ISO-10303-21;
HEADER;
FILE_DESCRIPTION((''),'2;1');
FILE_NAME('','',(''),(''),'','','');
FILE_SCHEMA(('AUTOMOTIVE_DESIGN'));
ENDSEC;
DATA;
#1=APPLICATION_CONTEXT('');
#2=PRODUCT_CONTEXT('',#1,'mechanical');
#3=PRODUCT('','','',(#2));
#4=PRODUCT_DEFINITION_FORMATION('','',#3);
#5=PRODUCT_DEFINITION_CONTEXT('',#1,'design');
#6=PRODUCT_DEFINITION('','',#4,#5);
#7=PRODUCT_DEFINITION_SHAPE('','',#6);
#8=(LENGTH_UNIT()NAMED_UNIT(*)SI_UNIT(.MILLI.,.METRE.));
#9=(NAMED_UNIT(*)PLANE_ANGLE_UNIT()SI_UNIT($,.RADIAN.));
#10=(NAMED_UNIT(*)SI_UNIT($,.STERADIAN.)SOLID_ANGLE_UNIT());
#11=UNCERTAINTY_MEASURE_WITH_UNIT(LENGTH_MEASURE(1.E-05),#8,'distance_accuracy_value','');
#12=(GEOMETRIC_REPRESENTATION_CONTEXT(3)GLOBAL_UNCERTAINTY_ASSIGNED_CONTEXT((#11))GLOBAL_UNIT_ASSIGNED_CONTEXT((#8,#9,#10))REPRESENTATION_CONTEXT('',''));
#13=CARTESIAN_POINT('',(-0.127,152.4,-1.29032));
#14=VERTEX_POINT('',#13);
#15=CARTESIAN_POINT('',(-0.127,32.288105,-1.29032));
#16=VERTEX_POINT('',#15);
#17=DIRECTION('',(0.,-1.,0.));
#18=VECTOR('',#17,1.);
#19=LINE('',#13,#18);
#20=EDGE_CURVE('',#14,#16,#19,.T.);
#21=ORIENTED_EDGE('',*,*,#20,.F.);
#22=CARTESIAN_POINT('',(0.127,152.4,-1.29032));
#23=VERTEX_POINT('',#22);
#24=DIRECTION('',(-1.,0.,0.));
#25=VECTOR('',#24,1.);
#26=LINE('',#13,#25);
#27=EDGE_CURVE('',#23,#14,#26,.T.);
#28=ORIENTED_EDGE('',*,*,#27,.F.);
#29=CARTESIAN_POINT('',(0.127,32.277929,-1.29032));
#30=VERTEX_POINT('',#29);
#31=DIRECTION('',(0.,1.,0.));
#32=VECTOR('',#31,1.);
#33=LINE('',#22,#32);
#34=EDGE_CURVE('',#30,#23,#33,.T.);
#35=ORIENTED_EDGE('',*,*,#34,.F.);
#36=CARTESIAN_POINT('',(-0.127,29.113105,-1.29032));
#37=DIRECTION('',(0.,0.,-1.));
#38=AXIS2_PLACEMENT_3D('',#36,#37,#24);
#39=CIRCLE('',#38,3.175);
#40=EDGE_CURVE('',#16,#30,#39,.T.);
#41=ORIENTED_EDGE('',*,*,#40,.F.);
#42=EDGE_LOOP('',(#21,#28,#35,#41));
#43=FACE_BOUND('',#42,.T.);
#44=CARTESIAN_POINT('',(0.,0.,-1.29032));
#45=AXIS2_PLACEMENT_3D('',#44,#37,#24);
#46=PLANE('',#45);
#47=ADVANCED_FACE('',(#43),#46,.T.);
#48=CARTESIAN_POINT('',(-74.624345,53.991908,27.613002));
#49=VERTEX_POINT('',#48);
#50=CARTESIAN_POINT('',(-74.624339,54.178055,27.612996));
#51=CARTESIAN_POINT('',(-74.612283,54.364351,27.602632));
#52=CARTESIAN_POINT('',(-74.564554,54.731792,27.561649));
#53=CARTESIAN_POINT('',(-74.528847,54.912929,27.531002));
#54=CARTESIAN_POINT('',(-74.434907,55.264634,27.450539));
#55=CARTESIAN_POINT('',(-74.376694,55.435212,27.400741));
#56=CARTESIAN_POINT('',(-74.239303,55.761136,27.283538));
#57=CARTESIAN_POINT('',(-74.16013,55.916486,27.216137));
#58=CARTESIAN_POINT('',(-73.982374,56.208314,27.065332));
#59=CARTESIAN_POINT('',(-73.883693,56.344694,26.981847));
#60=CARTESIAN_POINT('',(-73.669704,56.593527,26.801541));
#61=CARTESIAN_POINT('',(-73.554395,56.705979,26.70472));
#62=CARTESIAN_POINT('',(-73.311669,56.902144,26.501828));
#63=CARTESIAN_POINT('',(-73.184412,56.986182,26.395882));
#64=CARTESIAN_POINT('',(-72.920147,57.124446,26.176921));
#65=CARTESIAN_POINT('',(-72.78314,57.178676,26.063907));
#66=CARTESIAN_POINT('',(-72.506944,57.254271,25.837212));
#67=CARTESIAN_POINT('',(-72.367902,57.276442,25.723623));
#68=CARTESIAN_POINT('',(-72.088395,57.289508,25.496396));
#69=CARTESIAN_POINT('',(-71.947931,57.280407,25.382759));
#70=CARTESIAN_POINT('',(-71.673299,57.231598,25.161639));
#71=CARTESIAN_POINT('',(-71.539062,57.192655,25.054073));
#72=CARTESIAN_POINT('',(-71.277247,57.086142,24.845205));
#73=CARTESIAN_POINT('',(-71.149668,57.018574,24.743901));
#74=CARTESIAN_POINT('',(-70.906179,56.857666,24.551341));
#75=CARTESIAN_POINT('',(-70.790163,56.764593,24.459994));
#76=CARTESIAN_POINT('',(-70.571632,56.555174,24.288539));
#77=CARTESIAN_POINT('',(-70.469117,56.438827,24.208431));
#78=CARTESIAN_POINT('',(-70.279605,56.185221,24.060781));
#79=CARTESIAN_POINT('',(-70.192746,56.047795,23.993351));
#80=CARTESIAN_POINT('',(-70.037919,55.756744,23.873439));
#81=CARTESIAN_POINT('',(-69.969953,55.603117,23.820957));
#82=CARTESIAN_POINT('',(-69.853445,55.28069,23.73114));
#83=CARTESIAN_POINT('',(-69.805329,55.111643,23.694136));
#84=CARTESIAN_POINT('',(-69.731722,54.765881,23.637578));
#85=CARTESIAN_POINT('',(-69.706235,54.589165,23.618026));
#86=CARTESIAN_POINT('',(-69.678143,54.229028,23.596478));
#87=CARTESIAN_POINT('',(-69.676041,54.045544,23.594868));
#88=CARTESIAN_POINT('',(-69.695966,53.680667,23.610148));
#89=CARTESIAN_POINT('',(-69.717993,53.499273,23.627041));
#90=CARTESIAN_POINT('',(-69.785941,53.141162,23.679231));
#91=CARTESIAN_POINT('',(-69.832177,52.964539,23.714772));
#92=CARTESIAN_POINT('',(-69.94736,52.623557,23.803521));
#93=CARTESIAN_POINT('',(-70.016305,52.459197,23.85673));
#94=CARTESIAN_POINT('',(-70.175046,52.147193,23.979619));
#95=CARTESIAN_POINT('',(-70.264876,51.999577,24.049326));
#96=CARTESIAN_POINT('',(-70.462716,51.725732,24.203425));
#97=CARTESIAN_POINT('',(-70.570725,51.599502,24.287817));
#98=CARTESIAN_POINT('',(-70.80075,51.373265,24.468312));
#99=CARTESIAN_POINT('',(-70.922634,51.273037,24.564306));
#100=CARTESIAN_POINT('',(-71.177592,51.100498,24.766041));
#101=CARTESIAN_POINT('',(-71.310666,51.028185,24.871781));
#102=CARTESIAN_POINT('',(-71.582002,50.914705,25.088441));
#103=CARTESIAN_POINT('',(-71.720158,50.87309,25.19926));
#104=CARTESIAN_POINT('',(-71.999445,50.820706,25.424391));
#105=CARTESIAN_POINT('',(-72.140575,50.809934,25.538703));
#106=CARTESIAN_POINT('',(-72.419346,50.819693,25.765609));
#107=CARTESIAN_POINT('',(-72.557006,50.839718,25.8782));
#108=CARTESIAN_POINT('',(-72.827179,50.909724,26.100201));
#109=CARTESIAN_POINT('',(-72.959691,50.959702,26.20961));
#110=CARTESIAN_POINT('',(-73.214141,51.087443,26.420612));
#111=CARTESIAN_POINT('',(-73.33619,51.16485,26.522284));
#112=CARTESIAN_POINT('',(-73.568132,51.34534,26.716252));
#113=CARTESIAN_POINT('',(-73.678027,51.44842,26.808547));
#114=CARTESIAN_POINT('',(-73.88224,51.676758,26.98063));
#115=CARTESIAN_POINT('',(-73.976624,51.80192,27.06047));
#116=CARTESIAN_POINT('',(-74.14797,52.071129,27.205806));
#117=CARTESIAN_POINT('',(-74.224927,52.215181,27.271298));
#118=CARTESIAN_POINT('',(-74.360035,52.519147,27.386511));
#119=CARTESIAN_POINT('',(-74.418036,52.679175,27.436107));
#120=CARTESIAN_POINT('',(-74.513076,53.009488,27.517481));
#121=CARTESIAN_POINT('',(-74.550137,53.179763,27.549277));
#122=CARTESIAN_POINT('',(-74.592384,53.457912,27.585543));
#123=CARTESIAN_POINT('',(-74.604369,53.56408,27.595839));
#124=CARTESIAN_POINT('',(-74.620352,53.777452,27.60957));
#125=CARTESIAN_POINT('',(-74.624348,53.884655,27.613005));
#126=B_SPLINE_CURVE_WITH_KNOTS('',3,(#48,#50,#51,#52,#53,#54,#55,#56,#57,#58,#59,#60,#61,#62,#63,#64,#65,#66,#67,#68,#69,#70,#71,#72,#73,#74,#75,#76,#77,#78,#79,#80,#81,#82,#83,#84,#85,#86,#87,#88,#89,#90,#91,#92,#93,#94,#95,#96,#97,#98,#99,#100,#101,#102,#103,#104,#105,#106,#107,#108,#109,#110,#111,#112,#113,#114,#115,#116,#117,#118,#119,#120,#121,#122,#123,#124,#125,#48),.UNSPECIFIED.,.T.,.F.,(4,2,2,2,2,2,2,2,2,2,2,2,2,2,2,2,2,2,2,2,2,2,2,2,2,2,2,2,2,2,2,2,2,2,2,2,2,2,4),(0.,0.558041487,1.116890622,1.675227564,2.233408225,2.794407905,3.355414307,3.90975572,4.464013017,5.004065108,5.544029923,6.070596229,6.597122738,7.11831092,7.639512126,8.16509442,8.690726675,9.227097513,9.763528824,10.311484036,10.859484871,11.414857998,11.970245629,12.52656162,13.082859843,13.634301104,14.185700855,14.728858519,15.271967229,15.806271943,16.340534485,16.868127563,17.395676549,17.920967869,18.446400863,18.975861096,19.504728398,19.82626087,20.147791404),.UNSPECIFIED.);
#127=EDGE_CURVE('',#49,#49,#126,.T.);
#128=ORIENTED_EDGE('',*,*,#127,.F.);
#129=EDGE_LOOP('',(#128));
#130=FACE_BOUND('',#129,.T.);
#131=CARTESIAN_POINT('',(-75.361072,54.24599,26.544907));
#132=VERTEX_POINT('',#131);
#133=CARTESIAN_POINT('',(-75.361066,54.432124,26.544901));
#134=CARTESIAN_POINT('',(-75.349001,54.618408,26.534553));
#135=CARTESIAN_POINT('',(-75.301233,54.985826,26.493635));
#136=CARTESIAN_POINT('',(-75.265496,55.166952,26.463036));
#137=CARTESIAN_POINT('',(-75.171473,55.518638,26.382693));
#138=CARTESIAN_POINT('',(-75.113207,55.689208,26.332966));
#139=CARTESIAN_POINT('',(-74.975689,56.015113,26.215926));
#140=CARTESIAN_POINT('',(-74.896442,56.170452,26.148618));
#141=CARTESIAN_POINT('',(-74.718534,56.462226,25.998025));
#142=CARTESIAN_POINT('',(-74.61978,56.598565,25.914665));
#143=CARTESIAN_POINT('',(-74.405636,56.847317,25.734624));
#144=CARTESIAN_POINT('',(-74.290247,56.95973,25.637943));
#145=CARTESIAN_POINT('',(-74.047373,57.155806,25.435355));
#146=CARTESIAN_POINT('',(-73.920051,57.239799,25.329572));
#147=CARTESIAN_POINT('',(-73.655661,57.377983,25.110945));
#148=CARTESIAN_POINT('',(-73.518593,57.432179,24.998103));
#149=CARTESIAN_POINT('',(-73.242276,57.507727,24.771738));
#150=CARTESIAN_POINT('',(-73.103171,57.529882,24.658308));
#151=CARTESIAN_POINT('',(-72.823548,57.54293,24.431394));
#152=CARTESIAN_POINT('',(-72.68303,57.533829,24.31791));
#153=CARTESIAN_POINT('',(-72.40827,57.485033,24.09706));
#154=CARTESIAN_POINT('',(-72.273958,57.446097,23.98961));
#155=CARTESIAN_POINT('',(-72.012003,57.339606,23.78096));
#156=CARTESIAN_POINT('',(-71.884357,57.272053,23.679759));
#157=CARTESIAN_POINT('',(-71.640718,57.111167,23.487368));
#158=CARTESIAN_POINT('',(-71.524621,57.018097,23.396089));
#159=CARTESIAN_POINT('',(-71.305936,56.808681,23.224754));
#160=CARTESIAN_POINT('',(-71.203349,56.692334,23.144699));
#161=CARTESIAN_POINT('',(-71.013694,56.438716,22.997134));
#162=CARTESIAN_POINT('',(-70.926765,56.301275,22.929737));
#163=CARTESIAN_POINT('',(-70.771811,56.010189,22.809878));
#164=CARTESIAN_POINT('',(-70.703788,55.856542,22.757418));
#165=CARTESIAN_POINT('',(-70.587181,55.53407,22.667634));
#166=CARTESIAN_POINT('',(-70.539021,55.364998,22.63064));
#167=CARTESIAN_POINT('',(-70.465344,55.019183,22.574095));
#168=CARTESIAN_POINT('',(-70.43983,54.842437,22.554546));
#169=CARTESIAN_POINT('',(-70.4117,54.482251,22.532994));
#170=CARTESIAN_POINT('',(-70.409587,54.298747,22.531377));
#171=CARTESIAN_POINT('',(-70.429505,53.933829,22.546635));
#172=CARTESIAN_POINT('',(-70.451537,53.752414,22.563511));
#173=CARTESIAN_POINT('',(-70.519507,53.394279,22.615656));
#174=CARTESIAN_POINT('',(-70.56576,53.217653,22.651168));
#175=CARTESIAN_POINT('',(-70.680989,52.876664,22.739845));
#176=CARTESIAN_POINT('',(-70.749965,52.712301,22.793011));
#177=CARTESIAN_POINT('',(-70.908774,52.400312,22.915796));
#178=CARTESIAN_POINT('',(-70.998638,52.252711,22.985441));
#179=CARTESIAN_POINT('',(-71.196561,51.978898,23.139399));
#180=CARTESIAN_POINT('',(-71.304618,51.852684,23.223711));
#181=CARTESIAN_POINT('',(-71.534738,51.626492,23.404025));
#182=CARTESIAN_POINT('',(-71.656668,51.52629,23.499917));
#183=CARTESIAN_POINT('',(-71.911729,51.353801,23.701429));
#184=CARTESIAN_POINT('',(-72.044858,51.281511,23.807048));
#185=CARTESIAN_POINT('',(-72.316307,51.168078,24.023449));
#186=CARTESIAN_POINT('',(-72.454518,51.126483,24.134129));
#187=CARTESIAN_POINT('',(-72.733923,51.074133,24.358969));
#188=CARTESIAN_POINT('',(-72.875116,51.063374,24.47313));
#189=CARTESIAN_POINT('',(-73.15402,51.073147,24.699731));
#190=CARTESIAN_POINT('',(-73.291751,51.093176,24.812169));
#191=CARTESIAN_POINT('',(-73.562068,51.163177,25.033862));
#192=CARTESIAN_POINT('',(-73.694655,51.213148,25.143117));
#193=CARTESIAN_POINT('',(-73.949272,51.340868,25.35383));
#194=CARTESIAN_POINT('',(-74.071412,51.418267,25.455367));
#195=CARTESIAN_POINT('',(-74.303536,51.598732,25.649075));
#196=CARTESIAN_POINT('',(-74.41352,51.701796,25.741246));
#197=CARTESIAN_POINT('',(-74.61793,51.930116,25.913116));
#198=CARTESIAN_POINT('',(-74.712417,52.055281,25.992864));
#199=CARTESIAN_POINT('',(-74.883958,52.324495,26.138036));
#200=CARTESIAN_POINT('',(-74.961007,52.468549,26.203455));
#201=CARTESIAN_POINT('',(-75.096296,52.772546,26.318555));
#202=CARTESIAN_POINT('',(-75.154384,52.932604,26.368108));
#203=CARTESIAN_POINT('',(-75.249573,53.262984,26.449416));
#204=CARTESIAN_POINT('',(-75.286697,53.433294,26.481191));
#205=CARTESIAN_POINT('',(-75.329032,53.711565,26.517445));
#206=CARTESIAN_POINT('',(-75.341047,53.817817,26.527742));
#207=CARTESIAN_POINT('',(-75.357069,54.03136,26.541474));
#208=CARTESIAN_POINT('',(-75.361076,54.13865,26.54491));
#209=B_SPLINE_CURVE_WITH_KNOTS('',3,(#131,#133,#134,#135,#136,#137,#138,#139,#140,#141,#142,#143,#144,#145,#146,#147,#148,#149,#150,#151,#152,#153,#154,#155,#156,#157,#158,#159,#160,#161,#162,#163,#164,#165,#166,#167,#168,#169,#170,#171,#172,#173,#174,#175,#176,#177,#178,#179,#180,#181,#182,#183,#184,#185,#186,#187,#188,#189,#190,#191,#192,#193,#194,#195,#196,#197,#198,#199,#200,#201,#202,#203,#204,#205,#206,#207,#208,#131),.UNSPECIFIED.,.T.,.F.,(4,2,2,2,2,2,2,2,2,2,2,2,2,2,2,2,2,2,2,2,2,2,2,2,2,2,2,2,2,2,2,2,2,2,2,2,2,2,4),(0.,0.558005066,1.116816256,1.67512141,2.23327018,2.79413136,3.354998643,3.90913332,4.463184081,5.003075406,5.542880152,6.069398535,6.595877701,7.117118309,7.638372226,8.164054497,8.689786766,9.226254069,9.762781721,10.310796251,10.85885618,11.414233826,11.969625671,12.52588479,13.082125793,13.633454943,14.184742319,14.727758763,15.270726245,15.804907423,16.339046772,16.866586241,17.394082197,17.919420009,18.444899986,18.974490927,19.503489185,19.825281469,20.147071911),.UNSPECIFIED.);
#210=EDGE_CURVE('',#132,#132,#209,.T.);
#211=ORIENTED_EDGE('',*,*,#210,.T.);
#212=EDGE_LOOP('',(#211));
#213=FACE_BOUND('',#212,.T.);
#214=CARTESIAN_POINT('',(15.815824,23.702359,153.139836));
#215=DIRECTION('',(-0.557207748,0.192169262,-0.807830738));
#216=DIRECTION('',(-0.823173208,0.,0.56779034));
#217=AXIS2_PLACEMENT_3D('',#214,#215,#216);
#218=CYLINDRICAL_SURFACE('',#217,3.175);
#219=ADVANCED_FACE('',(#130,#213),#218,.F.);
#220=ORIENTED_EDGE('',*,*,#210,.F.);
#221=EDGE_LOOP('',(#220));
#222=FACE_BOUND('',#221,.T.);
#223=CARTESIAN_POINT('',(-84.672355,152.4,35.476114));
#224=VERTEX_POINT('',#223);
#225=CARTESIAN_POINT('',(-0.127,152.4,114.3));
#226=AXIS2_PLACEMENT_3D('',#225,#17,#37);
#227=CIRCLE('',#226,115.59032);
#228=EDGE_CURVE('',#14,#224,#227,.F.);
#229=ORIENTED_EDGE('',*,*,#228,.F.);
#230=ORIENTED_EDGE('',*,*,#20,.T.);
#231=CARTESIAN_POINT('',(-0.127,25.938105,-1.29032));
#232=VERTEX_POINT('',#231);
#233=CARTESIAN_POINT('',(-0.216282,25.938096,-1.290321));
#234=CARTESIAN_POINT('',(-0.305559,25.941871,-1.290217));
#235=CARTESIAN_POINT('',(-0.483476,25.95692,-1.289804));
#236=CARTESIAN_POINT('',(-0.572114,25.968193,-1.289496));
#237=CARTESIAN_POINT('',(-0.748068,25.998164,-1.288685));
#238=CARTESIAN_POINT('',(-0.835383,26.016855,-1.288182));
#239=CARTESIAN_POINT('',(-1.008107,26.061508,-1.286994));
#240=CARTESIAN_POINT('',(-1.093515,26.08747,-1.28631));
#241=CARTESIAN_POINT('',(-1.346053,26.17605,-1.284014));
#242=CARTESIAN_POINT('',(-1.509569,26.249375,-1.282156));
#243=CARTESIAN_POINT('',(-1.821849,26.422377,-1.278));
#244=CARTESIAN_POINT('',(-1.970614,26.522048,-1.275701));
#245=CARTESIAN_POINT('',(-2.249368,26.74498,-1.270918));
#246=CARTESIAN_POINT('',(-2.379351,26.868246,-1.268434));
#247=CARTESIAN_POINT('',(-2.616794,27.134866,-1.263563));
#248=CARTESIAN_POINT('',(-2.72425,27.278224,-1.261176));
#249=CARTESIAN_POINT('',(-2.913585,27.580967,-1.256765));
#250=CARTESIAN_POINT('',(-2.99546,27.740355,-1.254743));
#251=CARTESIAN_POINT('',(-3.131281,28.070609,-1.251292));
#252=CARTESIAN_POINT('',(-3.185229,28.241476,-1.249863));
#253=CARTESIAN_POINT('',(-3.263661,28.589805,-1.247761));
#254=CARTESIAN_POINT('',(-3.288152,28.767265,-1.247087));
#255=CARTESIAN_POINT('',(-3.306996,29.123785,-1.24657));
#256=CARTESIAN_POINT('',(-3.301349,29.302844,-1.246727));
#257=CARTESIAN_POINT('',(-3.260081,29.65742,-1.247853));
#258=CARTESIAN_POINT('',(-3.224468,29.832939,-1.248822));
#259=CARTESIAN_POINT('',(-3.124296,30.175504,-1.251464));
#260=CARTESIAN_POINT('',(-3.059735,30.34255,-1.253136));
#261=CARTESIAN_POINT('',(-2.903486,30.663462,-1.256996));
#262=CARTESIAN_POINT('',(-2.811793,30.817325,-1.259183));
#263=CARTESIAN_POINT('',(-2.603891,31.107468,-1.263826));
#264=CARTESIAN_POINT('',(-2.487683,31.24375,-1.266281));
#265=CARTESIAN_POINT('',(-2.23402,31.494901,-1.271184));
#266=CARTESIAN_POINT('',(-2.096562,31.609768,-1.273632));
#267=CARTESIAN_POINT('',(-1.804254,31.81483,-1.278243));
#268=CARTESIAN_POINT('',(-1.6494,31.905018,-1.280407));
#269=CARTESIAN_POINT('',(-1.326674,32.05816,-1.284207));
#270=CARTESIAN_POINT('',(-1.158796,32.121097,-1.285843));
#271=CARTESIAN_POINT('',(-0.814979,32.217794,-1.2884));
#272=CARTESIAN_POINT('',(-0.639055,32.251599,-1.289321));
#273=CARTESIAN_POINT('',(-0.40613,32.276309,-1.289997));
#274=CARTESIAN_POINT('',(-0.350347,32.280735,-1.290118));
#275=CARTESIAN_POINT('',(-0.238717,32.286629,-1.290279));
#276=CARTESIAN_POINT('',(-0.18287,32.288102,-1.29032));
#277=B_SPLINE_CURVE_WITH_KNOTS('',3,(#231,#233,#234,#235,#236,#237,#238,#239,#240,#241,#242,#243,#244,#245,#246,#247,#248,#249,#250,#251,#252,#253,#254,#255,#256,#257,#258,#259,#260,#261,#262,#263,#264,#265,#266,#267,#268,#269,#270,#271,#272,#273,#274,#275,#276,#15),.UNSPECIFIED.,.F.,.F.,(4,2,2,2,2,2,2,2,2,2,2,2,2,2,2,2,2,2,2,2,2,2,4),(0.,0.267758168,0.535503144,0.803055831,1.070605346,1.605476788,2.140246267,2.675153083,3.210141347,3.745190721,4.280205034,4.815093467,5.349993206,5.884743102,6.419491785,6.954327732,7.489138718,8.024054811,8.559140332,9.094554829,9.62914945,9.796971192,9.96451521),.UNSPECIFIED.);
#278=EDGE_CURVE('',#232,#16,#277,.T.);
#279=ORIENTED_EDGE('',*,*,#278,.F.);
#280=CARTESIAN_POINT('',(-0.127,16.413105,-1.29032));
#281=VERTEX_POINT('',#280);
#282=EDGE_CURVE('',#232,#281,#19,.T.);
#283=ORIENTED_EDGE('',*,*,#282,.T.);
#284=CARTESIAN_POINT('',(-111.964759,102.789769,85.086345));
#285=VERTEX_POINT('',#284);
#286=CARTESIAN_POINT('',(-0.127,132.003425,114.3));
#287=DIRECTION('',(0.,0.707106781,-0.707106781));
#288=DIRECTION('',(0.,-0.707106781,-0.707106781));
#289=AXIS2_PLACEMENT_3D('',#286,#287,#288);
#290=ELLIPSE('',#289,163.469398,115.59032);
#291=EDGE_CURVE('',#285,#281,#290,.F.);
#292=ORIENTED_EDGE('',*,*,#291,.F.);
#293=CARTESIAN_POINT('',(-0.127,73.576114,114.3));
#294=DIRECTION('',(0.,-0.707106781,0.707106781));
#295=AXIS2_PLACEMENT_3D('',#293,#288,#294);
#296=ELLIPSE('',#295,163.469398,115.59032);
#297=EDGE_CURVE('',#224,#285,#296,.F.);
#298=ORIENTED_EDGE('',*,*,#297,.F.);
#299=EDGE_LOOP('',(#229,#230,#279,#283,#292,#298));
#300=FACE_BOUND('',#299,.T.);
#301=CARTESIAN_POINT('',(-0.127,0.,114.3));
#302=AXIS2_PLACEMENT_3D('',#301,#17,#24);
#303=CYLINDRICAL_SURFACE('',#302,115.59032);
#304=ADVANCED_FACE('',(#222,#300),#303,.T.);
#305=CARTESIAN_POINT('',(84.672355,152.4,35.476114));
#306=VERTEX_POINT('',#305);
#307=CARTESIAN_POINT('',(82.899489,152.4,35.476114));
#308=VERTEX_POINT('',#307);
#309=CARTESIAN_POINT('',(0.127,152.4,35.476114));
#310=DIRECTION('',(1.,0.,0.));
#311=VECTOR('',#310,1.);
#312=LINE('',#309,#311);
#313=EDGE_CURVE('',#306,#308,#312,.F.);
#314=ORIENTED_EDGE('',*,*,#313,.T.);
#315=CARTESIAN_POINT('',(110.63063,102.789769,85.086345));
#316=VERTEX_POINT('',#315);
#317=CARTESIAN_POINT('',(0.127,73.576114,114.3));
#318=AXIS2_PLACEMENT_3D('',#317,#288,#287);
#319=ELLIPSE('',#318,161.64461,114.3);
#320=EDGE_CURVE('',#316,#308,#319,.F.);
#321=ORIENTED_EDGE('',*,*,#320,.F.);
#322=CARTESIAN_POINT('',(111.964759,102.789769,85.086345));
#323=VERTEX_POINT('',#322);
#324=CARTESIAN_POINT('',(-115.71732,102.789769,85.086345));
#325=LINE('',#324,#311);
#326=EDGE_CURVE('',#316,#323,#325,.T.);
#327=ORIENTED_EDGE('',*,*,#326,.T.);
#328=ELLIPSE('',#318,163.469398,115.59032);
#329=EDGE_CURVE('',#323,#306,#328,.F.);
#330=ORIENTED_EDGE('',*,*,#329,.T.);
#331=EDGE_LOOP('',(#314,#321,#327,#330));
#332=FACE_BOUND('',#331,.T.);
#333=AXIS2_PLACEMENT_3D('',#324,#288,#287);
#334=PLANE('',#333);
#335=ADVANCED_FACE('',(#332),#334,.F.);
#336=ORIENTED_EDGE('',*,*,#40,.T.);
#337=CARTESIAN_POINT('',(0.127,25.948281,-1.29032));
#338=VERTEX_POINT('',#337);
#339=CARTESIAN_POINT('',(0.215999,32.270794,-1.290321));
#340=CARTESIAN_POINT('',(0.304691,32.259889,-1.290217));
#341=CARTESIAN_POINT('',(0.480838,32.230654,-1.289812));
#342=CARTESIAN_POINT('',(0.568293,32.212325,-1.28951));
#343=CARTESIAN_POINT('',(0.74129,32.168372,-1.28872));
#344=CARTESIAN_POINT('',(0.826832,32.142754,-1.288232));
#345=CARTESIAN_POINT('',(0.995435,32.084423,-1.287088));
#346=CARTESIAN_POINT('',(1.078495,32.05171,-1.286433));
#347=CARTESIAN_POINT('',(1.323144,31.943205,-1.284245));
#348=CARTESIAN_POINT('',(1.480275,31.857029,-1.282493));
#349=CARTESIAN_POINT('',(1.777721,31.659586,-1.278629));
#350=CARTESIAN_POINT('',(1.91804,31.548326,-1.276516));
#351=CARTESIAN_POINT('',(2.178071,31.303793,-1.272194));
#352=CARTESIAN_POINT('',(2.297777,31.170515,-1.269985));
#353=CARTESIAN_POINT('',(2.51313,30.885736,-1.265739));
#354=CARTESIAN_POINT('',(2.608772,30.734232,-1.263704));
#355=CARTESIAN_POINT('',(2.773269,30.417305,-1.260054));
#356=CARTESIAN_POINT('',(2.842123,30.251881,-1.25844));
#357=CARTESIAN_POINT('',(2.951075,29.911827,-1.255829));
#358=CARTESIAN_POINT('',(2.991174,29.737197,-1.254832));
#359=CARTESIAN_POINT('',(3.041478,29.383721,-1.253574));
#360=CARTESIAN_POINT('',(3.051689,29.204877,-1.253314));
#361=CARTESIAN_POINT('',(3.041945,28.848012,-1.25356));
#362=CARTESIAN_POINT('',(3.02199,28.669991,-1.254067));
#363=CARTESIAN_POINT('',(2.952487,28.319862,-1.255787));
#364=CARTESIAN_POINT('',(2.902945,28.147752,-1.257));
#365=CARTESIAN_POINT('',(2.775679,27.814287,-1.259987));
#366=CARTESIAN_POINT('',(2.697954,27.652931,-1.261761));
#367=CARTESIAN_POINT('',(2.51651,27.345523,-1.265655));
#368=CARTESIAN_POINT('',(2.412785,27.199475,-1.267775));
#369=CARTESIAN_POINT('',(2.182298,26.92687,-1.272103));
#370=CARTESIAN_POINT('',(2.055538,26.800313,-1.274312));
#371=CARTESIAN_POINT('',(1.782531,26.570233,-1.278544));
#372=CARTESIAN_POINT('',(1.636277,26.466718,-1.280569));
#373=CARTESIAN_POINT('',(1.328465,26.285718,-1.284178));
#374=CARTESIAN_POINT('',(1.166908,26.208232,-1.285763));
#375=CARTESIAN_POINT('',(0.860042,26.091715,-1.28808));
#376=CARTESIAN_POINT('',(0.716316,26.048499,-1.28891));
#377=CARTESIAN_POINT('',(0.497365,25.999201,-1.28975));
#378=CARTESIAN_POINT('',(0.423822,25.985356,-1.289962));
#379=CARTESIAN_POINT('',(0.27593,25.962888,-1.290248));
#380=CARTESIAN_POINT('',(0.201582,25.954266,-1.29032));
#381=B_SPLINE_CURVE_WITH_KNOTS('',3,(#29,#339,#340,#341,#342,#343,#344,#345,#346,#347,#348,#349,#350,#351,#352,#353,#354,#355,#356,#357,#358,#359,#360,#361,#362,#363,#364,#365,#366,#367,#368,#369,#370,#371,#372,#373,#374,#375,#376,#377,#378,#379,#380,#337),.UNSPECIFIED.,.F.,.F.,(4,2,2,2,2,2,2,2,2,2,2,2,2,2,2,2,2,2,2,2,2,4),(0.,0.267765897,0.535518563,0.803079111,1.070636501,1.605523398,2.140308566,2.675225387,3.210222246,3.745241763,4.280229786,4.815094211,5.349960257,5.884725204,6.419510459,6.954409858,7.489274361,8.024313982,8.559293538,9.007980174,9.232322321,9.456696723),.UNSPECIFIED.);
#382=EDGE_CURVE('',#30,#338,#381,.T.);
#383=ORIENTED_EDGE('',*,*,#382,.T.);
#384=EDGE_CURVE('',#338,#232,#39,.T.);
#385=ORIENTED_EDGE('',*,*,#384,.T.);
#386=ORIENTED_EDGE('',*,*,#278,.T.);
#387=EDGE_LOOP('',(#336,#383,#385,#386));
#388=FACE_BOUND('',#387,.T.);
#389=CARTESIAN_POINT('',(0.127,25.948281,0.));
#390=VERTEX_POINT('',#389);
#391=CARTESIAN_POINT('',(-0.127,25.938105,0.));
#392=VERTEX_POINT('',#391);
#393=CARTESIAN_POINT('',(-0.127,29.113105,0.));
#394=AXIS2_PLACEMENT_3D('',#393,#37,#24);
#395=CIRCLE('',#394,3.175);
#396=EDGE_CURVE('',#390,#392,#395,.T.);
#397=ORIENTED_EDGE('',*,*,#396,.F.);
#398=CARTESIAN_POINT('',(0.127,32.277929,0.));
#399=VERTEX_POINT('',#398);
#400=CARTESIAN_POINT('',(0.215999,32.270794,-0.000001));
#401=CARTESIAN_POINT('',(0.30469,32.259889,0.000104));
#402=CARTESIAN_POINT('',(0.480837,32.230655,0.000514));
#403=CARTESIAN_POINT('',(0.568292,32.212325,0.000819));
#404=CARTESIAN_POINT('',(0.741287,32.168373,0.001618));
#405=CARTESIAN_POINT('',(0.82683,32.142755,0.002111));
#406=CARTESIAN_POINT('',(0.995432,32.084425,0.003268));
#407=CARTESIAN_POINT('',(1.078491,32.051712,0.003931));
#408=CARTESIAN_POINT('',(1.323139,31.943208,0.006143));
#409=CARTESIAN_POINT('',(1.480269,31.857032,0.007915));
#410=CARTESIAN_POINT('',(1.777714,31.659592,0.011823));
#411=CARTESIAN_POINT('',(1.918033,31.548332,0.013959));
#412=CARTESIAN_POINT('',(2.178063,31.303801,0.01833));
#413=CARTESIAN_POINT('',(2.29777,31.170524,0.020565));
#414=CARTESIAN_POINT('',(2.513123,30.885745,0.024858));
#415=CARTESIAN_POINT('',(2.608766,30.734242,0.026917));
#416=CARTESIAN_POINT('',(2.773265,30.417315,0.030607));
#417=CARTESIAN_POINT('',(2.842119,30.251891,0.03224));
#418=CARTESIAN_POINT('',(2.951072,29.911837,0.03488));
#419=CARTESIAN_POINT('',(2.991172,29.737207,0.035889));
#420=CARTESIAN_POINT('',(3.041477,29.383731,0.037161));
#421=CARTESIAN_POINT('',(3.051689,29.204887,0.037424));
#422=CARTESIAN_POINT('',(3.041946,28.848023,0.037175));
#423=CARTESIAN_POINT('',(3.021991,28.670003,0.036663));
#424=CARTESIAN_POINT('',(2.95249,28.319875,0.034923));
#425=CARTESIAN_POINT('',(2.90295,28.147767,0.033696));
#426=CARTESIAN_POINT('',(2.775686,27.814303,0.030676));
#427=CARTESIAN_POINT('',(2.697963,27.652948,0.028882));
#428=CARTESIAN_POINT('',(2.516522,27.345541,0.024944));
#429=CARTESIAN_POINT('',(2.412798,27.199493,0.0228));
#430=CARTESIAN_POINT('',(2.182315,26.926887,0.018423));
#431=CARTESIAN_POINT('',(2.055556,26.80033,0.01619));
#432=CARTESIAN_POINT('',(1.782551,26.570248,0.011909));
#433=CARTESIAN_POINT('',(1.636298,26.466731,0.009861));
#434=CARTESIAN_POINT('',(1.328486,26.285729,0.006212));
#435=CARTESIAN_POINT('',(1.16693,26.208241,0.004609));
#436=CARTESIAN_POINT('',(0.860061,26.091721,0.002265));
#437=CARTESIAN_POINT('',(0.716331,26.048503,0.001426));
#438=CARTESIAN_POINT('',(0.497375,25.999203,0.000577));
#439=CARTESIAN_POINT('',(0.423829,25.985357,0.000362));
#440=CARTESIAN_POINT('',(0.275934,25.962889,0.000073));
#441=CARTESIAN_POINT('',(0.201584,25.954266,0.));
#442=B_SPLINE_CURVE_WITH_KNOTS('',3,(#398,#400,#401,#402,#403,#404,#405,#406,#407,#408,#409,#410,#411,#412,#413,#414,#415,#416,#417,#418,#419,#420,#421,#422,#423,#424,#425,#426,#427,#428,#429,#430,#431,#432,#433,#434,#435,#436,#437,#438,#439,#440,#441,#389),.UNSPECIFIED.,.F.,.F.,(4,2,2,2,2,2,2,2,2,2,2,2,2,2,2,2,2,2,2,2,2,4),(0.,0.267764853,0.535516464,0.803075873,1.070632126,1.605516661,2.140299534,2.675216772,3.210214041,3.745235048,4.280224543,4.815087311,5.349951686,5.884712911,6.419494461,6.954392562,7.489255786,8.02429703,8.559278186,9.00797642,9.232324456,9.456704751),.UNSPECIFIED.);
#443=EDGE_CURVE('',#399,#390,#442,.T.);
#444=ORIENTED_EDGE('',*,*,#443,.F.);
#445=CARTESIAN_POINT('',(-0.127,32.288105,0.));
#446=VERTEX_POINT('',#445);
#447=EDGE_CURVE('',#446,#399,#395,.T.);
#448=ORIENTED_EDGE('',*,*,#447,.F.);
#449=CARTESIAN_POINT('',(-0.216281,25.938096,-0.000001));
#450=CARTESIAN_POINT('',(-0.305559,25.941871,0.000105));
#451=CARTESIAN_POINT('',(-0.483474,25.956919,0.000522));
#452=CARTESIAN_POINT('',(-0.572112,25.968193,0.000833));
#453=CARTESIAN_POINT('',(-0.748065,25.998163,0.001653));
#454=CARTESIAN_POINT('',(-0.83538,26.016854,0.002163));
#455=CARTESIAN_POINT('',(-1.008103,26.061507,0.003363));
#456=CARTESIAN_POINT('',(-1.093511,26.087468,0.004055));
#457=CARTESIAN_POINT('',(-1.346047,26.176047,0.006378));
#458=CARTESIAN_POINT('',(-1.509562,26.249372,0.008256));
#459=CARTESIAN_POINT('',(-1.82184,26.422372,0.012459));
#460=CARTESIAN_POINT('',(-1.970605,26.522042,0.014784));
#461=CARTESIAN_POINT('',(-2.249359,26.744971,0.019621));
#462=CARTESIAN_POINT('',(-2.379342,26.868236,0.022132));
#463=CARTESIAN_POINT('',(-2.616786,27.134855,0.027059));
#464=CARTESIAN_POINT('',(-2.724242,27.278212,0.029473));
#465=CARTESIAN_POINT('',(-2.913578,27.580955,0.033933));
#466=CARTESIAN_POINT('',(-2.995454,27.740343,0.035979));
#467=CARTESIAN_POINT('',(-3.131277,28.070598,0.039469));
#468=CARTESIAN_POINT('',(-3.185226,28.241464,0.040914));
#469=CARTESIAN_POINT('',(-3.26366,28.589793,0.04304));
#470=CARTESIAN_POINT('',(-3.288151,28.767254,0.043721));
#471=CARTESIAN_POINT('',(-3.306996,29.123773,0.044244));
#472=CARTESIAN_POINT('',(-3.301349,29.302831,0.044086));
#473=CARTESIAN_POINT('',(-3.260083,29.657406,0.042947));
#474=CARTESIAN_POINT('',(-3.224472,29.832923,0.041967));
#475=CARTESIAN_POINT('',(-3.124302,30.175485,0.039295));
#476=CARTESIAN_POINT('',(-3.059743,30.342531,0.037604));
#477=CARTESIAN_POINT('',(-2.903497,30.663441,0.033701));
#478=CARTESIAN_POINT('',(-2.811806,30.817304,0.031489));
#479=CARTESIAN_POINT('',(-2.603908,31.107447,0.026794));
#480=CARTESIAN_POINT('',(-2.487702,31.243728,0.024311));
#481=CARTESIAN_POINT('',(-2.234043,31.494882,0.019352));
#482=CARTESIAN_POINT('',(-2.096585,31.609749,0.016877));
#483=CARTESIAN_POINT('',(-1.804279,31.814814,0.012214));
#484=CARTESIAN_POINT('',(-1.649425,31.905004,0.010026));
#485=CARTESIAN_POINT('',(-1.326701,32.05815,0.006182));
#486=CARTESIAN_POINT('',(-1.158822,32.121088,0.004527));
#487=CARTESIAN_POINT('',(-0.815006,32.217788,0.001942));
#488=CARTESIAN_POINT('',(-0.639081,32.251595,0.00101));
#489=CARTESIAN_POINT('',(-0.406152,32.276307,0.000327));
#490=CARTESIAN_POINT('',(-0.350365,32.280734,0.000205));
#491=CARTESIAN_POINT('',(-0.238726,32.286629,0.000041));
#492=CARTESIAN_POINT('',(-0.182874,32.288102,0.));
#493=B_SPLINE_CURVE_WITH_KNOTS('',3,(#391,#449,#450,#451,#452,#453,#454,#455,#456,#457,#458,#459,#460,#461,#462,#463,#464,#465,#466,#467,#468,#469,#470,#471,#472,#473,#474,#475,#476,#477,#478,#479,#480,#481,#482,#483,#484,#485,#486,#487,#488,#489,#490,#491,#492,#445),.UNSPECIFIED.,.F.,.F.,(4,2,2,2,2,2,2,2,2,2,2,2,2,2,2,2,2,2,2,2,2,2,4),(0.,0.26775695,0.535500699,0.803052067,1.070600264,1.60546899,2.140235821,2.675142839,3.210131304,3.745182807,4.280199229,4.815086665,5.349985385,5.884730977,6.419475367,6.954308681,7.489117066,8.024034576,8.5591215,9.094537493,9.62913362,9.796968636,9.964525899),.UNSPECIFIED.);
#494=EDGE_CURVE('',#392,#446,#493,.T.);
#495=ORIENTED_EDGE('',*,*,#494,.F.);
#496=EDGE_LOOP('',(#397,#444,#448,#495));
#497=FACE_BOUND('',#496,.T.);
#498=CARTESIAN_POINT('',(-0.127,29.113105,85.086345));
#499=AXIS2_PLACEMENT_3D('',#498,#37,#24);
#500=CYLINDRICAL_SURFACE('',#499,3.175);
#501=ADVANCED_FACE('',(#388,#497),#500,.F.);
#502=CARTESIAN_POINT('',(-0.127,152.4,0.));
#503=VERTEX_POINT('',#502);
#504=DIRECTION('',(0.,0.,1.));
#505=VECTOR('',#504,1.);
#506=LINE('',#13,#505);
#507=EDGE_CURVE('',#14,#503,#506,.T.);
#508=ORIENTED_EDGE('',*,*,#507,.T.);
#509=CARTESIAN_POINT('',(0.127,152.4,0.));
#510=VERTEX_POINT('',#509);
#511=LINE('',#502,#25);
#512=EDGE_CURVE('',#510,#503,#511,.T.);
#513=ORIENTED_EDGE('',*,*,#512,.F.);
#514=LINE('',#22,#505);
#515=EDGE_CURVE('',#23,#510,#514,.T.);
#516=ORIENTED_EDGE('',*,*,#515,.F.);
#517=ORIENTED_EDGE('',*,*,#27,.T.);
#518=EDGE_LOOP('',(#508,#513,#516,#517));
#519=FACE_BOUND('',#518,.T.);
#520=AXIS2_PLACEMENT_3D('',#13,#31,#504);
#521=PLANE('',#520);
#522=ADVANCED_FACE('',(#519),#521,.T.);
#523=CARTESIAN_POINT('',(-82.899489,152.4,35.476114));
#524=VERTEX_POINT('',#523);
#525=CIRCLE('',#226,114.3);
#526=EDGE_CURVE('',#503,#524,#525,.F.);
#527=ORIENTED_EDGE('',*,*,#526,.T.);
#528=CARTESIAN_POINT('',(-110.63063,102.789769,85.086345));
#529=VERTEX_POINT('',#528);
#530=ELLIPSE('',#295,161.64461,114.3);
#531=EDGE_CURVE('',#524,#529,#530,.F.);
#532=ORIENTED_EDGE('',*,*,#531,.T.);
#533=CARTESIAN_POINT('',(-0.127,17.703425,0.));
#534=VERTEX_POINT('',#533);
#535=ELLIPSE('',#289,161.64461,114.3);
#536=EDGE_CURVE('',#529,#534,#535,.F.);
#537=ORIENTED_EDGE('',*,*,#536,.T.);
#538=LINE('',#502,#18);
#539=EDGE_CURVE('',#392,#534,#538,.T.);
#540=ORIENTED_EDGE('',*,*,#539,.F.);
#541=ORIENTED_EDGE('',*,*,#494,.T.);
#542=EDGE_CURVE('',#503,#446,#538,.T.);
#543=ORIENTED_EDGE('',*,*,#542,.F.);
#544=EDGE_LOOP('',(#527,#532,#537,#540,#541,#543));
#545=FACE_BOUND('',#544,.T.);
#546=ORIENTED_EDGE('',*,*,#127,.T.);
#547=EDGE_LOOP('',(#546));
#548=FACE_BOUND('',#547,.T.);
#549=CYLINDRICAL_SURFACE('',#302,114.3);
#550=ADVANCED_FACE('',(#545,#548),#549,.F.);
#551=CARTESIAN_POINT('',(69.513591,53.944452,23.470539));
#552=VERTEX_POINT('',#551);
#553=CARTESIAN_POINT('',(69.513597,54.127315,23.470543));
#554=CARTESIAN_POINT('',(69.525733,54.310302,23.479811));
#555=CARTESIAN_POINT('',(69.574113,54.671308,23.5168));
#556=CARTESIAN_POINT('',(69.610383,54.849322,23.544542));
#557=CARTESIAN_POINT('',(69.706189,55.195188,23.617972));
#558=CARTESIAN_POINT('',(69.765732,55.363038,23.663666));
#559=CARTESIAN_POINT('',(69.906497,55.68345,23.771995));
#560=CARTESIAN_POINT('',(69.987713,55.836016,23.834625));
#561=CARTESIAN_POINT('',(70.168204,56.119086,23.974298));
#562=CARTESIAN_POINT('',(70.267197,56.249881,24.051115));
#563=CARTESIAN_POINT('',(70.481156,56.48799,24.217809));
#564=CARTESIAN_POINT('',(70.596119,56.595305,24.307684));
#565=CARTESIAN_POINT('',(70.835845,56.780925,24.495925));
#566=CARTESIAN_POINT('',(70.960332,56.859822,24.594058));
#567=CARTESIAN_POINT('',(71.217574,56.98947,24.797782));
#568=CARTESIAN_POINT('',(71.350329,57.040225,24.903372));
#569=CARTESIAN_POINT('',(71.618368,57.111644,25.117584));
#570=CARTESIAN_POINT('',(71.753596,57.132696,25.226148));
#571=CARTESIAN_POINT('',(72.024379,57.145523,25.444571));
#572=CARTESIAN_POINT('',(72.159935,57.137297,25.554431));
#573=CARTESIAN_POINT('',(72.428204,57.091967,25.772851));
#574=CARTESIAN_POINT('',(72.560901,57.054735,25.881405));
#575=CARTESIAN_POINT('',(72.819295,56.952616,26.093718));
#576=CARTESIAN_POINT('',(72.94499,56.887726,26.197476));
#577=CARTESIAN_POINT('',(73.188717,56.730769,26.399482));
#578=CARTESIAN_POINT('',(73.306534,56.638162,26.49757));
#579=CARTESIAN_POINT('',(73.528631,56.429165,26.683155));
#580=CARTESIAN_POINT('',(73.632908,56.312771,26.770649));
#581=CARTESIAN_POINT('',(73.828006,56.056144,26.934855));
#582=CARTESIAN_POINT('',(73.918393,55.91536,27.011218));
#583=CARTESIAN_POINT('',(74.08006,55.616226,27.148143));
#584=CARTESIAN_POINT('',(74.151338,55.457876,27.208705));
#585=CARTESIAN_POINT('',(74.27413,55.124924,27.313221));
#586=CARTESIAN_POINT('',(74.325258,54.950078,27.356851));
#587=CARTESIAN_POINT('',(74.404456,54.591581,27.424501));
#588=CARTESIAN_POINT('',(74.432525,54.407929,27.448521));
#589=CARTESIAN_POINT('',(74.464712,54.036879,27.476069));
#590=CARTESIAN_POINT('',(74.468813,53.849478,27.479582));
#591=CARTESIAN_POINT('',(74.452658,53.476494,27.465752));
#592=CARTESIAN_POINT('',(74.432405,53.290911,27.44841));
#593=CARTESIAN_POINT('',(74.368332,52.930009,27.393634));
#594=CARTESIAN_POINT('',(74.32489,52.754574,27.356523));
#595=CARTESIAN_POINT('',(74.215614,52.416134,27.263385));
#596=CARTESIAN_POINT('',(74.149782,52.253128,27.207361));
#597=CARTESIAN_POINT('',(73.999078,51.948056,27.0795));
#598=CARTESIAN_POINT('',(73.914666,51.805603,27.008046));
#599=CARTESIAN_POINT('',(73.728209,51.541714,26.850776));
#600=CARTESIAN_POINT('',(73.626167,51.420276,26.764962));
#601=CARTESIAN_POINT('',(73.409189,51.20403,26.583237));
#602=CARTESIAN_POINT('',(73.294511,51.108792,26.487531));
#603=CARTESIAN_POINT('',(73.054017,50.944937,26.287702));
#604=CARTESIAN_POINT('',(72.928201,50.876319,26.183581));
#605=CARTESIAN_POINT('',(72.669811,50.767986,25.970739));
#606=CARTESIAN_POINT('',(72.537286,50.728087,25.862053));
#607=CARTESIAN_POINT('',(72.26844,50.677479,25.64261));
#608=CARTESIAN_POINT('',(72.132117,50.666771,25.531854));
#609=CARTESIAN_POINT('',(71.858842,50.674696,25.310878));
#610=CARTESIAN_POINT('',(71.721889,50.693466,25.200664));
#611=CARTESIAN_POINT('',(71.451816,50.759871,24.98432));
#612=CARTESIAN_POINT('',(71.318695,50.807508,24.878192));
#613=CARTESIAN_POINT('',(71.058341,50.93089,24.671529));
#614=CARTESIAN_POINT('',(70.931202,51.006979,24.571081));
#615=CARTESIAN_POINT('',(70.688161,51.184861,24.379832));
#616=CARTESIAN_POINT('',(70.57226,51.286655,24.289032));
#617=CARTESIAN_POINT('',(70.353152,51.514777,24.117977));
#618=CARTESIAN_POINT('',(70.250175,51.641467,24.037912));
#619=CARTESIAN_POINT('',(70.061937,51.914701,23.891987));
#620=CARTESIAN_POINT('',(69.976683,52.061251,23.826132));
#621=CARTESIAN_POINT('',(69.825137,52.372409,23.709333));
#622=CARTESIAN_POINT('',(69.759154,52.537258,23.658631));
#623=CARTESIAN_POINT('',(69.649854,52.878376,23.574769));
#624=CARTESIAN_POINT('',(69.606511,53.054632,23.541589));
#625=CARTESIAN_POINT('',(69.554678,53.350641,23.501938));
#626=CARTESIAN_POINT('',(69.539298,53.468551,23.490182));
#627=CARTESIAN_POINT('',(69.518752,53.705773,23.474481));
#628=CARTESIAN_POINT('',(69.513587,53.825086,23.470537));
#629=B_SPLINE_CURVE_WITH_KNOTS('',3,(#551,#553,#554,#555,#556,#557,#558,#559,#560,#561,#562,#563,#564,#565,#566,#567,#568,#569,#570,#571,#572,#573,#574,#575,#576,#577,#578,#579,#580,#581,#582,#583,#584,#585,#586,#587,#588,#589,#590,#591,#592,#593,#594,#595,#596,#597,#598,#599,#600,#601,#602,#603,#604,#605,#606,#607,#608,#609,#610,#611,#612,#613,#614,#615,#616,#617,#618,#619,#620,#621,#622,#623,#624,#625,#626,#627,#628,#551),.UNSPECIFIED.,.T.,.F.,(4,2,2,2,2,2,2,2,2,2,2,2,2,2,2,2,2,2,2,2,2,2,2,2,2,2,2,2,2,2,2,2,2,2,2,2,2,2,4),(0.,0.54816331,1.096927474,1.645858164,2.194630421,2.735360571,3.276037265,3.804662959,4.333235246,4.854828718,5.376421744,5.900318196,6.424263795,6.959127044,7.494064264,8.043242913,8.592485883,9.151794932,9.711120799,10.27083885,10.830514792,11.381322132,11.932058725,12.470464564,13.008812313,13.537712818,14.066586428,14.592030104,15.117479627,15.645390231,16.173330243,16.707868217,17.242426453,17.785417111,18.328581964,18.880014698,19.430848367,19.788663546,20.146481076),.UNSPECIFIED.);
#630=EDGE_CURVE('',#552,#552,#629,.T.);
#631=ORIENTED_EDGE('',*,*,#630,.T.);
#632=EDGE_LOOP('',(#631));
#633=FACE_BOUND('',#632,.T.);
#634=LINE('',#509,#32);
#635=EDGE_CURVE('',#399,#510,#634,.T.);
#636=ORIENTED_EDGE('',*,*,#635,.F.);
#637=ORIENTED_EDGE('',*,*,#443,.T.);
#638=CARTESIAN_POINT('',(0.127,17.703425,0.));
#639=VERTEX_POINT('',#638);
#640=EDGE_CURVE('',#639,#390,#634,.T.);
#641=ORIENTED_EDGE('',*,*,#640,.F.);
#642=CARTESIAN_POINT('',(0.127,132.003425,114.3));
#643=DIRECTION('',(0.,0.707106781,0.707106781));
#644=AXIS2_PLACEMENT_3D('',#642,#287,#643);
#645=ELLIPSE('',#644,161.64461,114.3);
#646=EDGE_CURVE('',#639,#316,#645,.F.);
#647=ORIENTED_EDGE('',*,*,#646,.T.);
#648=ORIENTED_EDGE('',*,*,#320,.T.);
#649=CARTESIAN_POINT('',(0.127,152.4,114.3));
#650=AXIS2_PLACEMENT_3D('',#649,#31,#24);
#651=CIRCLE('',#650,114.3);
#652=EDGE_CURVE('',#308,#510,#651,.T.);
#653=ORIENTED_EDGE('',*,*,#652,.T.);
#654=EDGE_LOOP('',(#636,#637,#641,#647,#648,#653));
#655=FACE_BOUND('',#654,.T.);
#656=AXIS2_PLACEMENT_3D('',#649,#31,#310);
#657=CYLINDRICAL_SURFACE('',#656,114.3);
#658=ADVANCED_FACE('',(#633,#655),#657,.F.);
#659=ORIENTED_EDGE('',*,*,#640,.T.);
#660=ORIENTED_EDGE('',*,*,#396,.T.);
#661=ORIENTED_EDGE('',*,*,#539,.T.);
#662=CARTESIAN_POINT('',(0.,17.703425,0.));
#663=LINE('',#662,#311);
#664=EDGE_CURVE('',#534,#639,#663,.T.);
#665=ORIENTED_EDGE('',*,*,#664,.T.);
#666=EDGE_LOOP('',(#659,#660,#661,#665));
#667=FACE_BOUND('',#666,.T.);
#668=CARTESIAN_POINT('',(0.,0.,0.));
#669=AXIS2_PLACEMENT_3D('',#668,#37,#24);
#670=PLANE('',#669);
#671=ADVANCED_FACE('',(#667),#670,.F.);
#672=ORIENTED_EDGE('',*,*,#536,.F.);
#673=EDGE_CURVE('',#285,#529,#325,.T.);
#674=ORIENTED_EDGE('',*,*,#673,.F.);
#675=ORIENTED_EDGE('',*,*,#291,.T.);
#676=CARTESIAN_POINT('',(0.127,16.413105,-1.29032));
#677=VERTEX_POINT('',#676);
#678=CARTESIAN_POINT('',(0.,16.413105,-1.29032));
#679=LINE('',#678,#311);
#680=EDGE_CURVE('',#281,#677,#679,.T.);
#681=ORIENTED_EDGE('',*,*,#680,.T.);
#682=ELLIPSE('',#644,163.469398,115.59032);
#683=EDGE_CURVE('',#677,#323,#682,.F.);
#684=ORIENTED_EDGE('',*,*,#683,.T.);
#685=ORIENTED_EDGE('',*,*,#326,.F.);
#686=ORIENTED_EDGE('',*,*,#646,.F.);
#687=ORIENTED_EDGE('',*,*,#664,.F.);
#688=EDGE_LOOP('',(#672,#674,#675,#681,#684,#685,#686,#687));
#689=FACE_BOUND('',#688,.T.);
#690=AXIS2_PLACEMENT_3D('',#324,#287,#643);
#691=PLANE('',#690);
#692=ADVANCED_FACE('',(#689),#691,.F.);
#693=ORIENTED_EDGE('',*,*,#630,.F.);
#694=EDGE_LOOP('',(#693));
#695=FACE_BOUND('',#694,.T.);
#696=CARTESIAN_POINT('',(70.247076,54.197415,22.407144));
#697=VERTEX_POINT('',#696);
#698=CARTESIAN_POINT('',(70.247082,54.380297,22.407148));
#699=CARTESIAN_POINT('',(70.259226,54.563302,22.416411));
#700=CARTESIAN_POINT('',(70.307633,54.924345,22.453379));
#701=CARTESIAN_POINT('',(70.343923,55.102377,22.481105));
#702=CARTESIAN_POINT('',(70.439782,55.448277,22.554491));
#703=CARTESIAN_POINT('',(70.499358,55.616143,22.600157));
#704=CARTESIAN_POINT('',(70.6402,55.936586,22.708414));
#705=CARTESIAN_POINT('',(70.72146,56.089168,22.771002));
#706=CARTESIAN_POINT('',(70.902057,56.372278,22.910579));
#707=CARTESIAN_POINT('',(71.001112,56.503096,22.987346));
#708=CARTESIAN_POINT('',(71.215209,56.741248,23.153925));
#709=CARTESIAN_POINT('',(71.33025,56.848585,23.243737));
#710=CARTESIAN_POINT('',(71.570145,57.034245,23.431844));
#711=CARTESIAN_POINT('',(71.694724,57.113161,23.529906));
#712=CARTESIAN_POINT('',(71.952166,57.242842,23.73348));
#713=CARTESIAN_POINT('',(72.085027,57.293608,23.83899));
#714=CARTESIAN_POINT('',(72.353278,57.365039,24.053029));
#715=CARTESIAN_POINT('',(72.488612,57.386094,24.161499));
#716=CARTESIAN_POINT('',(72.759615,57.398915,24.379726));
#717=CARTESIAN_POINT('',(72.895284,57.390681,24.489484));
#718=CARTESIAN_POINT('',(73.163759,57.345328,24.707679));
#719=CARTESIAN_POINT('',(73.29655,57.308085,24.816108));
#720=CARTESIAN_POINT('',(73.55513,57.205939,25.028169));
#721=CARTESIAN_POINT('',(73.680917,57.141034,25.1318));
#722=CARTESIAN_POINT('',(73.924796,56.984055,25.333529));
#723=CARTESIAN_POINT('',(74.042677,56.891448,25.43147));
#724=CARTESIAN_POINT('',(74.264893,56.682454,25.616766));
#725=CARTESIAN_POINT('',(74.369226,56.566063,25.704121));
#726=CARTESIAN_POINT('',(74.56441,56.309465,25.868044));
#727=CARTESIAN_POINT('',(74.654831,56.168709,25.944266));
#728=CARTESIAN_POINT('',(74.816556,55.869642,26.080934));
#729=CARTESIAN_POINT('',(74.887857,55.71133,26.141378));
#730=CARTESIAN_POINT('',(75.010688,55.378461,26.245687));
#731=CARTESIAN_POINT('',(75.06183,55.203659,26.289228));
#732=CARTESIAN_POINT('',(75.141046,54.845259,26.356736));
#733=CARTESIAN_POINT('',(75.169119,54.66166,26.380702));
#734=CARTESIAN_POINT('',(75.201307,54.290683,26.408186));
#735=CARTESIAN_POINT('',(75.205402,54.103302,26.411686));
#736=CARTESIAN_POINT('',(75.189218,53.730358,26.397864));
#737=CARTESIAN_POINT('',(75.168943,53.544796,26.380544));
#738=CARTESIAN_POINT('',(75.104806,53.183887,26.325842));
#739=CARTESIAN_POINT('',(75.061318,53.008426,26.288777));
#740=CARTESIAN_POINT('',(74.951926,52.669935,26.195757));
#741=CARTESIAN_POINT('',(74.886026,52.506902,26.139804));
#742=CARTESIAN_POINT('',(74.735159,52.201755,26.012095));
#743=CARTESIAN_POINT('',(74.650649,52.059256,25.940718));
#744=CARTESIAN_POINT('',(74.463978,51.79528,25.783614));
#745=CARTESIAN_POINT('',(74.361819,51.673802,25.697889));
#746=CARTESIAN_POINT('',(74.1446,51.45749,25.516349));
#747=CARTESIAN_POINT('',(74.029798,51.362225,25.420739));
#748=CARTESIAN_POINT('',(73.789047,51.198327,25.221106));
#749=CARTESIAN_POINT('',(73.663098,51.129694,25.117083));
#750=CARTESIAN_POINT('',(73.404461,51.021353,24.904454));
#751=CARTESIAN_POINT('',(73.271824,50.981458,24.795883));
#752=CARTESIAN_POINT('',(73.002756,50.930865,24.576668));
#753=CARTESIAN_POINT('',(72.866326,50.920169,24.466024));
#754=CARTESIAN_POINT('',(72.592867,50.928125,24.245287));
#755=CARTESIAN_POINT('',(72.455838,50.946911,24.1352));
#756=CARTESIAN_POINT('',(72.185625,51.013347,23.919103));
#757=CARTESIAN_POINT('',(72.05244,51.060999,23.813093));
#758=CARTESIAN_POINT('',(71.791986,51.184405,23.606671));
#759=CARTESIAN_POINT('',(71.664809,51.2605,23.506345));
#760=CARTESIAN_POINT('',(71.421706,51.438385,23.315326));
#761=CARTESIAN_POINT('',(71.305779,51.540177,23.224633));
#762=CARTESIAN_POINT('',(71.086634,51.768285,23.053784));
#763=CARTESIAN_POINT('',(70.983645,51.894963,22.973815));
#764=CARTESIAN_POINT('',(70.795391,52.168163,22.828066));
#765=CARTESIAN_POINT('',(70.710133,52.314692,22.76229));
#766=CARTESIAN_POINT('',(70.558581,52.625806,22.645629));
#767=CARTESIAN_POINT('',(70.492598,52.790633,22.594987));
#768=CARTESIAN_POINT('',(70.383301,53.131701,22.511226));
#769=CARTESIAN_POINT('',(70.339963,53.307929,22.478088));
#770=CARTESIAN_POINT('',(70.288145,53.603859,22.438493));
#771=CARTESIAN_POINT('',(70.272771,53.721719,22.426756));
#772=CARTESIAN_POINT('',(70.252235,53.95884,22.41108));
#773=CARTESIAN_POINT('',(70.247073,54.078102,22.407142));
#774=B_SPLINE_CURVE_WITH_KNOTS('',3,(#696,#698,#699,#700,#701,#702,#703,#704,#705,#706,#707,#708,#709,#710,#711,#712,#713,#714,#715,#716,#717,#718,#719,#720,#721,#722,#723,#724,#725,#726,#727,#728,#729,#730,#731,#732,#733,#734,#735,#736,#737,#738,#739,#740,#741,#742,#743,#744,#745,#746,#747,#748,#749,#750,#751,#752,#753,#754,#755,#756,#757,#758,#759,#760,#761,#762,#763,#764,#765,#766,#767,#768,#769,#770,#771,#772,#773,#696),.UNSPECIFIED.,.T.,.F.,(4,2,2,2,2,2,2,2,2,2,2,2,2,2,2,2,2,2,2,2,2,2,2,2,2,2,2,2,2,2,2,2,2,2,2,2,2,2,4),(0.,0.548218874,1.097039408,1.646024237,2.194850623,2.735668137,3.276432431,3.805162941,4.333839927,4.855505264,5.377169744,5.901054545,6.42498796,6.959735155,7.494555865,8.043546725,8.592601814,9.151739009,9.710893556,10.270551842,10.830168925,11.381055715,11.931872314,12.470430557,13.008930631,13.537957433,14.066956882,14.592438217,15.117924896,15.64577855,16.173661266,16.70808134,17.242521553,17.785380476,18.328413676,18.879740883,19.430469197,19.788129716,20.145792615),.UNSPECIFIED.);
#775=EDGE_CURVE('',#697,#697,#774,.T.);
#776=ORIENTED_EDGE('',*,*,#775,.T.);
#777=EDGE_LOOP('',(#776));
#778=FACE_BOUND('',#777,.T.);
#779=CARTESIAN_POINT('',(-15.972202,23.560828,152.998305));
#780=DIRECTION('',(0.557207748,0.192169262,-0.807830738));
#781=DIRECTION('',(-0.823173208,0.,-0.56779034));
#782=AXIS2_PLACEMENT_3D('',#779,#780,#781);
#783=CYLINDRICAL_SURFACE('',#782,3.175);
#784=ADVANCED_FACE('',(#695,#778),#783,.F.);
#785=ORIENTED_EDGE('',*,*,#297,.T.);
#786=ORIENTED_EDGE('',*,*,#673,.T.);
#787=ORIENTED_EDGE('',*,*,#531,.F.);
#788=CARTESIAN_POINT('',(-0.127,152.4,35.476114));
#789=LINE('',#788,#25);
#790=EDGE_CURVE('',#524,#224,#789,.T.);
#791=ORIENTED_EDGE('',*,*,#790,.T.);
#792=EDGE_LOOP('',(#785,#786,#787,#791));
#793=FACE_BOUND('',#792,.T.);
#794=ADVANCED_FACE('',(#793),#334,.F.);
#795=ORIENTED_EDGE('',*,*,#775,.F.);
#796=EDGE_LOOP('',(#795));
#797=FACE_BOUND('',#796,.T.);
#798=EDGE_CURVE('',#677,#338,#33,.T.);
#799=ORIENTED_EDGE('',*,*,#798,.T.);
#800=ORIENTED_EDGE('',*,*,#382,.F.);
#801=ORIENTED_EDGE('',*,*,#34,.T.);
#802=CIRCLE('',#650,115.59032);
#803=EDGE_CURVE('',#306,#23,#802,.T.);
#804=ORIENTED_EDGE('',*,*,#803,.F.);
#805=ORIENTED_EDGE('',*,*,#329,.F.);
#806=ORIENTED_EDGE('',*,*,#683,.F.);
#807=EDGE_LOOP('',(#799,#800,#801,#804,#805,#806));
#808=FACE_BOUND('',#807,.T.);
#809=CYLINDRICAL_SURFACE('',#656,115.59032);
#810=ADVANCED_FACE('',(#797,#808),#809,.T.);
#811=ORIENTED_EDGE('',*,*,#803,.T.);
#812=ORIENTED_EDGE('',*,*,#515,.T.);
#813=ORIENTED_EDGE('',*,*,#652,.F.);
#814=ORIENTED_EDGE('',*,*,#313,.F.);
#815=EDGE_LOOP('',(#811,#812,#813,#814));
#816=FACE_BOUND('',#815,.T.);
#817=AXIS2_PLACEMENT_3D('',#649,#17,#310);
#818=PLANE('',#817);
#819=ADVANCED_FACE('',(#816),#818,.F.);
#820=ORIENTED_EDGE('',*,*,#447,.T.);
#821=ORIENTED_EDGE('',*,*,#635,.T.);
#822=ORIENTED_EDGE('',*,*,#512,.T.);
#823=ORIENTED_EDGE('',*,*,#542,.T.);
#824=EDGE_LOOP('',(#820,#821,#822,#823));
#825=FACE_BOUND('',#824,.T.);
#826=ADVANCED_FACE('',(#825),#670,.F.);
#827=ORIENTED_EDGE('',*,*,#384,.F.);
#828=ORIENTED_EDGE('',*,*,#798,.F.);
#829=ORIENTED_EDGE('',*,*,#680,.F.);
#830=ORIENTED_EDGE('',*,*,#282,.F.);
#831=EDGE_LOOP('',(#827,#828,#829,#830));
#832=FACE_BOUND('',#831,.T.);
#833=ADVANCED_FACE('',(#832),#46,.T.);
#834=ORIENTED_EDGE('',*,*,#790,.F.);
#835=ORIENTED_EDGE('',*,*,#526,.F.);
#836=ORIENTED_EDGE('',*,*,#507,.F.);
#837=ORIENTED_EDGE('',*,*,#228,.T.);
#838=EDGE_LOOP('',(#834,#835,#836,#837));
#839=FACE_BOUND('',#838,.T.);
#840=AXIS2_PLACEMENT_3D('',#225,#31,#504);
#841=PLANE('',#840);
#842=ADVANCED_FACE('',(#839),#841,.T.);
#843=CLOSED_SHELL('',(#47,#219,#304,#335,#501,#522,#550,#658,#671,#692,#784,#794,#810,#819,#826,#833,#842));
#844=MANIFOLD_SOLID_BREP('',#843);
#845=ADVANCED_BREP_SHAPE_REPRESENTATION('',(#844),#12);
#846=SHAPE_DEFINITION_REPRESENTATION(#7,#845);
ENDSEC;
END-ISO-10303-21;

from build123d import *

# Parameters (mm, degrees)
SKETCH1_W                       = 0.254
SKETCH1_H                       = 152.4
BASE_FLANGE1_DEPTH              = 1.29032
EDGE_FLANGE1_DEPTH              = 152.4
EDGE_FLANGE1_BEND_DEPTH         = 152.4
CUT_EXTRUDE6_DEPTH              = 229.952357039
CUT_EXTRUDE6_DEPTH_BACK         = 229.952357039
SKETCH15_R                      = 3.175
CUT_EXTRUDE7_DEPTH              = 208.900927137
CIRPATTERN2_COUNT               = 2
CIRPATTERN2_ANGLE               = 52
CIRPATTERN2_THE_OTHER_WAY_COUNT = 2
CIRPATTERN2_THE_OTHER_WAY_ANGLE = 52


# Sheet-metal steps are written as plain solids
with BuildPart() as part:
    # Sketch1 → Base-Flange1 (new body)
    with BuildSketch(Plane.XY):
        with Locations((0, 76.2)):
            Rectangle(SKETCH1_W, SKETCH1_H)
    extrude(amount=-BASE_FLANGE1_DEPTH)

    # Edge-Flange1 section (across the edge) → Edge-Flange1 (add)
    with BuildSketch(Plane(origin=(114.427, 0, 0), x_dir=(-1, 0, 0), z_dir=(0, 1, 0))):
        with BuildLine():
            Line((-1.29032, 114.3), (-1.29032, 125.70968))
            Line((-1.29032, 125.70968), (0, 125.70968))
            Line((0, 125.70968), (0, 114.3))
            ThreePointArc((0, 114.3), (33.47769491, 33.47769491), (114.3, 0))
            Line((114.3, 0), (114.3, -1.29032))
            ThreePointArc((114.3, -1.29032), (32.565300888, 32.565300888), (-1.29032, 114.3))
        make_face()
    extrude(amount=EDGE_FLANGE1_DEPTH)

    # Edge-Flange1 section 2 (across the edge) → Edge-Flange1 bend (add)
    with BuildSketch(Plane(origin=(-114.427, 152.4, 0), x_dir=(1, 0, 0), z_dir=(0, -1, 0))):
        with BuildLine():
            Line((-1.29032, 114.3), (-1.29032, 125.70968))
            Line((-1.29032, 125.70968), (0, 125.70968))
            Line((0, 125.70968), (0, 114.3))
            ThreePointArc((0, 114.3), (33.47769491, 33.47769491), (114.3, 0))
            Line((114.3, 0), (114.3, -1.29032))
            ThreePointArc((114.3, -1.29032), (32.565300888, 32.565300888), (-1.29032, 114.3))
        make_face()
    extrude(amount=EDGE_FLANGE1_BEND_DEPTH)

    # Sketch14 → Cut-Extrude6 (cut, two sides: drawn at the far end of the back side and taken through both)
    with BuildSketch(Plane(origin=(0, 0, 0), x_dir=(0, 0, -1), z_dir=(1, 0, 0)).offset(-CUT_EXTRUDE6_DEPTH_BACK)):
        Polygon((-85.086344518, 102.789769459), (40.691860392, -22.988435452), (-72.437884386, -136.118180231), (-256.114134731, 47.558070115), (-142.984389953, 160.687814893), (-68.759425458, 243.273840802), (-6.680849316, 181.19526466), align=None)
    extrude(amount=CUT_EXTRUDE6_DEPTH + CUT_EXTRUDE6_DEPTH_BACK, mode=Mode.SUBTRACT)

    # Sketch15 → Cut-Extrude7 (cut, symmetric)
    with BuildSketch(Plane(origin=(0, 0, -1.29032), x_dir=(-1, 0, 0), z_dir=(0, 0, -1))):
        with Locations(Location((0.127, 29.11310494, 0), (0, 0, 90))):
            Circle(SKETCH15_R)
    cut_extrude7 = extrude(amount=CUT_EXTRUDE7_DEPTH, both=True, mode=Mode.SUBTRACT)

    # CirPattern2: Cut-Extrude7 ×2 about axis
    cirpattern2_axis = Axis((0, 79.569647195, 79.569647195), (0, 0.707106781186544, -0.7071067811865511))
    for i in range(1, CIRPATTERN2_COUNT):
        add(cut_extrude7.rotate(cirpattern2_axis, i * CIRPATTERN2_ANGLE / (CIRPATTERN2_COUNT - 1)), mode=Mode.SUBTRACT)

    # CirPattern2 the other way: Cut-Extrude7 ×2 about axis
    cirpattern2_the_other_way_axis = Axis((0, 79.569647195, 79.569647195), (0, -0.707106781186544, 0.7071067811865511))
    for i in range(1, CIRPATTERN2_THE_OTHER_WAY_COUNT):
        add(cut_extrude7.rotate(cirpattern2_the_other_way_axis, i * CIRPATTERN2_THE_OTHER_WAY_ANGLE / (CIRPATTERN2_THE_OTHER_WAY_COUNT - 1)), mode=Mode.SUBTRACT)


solid = part.part
